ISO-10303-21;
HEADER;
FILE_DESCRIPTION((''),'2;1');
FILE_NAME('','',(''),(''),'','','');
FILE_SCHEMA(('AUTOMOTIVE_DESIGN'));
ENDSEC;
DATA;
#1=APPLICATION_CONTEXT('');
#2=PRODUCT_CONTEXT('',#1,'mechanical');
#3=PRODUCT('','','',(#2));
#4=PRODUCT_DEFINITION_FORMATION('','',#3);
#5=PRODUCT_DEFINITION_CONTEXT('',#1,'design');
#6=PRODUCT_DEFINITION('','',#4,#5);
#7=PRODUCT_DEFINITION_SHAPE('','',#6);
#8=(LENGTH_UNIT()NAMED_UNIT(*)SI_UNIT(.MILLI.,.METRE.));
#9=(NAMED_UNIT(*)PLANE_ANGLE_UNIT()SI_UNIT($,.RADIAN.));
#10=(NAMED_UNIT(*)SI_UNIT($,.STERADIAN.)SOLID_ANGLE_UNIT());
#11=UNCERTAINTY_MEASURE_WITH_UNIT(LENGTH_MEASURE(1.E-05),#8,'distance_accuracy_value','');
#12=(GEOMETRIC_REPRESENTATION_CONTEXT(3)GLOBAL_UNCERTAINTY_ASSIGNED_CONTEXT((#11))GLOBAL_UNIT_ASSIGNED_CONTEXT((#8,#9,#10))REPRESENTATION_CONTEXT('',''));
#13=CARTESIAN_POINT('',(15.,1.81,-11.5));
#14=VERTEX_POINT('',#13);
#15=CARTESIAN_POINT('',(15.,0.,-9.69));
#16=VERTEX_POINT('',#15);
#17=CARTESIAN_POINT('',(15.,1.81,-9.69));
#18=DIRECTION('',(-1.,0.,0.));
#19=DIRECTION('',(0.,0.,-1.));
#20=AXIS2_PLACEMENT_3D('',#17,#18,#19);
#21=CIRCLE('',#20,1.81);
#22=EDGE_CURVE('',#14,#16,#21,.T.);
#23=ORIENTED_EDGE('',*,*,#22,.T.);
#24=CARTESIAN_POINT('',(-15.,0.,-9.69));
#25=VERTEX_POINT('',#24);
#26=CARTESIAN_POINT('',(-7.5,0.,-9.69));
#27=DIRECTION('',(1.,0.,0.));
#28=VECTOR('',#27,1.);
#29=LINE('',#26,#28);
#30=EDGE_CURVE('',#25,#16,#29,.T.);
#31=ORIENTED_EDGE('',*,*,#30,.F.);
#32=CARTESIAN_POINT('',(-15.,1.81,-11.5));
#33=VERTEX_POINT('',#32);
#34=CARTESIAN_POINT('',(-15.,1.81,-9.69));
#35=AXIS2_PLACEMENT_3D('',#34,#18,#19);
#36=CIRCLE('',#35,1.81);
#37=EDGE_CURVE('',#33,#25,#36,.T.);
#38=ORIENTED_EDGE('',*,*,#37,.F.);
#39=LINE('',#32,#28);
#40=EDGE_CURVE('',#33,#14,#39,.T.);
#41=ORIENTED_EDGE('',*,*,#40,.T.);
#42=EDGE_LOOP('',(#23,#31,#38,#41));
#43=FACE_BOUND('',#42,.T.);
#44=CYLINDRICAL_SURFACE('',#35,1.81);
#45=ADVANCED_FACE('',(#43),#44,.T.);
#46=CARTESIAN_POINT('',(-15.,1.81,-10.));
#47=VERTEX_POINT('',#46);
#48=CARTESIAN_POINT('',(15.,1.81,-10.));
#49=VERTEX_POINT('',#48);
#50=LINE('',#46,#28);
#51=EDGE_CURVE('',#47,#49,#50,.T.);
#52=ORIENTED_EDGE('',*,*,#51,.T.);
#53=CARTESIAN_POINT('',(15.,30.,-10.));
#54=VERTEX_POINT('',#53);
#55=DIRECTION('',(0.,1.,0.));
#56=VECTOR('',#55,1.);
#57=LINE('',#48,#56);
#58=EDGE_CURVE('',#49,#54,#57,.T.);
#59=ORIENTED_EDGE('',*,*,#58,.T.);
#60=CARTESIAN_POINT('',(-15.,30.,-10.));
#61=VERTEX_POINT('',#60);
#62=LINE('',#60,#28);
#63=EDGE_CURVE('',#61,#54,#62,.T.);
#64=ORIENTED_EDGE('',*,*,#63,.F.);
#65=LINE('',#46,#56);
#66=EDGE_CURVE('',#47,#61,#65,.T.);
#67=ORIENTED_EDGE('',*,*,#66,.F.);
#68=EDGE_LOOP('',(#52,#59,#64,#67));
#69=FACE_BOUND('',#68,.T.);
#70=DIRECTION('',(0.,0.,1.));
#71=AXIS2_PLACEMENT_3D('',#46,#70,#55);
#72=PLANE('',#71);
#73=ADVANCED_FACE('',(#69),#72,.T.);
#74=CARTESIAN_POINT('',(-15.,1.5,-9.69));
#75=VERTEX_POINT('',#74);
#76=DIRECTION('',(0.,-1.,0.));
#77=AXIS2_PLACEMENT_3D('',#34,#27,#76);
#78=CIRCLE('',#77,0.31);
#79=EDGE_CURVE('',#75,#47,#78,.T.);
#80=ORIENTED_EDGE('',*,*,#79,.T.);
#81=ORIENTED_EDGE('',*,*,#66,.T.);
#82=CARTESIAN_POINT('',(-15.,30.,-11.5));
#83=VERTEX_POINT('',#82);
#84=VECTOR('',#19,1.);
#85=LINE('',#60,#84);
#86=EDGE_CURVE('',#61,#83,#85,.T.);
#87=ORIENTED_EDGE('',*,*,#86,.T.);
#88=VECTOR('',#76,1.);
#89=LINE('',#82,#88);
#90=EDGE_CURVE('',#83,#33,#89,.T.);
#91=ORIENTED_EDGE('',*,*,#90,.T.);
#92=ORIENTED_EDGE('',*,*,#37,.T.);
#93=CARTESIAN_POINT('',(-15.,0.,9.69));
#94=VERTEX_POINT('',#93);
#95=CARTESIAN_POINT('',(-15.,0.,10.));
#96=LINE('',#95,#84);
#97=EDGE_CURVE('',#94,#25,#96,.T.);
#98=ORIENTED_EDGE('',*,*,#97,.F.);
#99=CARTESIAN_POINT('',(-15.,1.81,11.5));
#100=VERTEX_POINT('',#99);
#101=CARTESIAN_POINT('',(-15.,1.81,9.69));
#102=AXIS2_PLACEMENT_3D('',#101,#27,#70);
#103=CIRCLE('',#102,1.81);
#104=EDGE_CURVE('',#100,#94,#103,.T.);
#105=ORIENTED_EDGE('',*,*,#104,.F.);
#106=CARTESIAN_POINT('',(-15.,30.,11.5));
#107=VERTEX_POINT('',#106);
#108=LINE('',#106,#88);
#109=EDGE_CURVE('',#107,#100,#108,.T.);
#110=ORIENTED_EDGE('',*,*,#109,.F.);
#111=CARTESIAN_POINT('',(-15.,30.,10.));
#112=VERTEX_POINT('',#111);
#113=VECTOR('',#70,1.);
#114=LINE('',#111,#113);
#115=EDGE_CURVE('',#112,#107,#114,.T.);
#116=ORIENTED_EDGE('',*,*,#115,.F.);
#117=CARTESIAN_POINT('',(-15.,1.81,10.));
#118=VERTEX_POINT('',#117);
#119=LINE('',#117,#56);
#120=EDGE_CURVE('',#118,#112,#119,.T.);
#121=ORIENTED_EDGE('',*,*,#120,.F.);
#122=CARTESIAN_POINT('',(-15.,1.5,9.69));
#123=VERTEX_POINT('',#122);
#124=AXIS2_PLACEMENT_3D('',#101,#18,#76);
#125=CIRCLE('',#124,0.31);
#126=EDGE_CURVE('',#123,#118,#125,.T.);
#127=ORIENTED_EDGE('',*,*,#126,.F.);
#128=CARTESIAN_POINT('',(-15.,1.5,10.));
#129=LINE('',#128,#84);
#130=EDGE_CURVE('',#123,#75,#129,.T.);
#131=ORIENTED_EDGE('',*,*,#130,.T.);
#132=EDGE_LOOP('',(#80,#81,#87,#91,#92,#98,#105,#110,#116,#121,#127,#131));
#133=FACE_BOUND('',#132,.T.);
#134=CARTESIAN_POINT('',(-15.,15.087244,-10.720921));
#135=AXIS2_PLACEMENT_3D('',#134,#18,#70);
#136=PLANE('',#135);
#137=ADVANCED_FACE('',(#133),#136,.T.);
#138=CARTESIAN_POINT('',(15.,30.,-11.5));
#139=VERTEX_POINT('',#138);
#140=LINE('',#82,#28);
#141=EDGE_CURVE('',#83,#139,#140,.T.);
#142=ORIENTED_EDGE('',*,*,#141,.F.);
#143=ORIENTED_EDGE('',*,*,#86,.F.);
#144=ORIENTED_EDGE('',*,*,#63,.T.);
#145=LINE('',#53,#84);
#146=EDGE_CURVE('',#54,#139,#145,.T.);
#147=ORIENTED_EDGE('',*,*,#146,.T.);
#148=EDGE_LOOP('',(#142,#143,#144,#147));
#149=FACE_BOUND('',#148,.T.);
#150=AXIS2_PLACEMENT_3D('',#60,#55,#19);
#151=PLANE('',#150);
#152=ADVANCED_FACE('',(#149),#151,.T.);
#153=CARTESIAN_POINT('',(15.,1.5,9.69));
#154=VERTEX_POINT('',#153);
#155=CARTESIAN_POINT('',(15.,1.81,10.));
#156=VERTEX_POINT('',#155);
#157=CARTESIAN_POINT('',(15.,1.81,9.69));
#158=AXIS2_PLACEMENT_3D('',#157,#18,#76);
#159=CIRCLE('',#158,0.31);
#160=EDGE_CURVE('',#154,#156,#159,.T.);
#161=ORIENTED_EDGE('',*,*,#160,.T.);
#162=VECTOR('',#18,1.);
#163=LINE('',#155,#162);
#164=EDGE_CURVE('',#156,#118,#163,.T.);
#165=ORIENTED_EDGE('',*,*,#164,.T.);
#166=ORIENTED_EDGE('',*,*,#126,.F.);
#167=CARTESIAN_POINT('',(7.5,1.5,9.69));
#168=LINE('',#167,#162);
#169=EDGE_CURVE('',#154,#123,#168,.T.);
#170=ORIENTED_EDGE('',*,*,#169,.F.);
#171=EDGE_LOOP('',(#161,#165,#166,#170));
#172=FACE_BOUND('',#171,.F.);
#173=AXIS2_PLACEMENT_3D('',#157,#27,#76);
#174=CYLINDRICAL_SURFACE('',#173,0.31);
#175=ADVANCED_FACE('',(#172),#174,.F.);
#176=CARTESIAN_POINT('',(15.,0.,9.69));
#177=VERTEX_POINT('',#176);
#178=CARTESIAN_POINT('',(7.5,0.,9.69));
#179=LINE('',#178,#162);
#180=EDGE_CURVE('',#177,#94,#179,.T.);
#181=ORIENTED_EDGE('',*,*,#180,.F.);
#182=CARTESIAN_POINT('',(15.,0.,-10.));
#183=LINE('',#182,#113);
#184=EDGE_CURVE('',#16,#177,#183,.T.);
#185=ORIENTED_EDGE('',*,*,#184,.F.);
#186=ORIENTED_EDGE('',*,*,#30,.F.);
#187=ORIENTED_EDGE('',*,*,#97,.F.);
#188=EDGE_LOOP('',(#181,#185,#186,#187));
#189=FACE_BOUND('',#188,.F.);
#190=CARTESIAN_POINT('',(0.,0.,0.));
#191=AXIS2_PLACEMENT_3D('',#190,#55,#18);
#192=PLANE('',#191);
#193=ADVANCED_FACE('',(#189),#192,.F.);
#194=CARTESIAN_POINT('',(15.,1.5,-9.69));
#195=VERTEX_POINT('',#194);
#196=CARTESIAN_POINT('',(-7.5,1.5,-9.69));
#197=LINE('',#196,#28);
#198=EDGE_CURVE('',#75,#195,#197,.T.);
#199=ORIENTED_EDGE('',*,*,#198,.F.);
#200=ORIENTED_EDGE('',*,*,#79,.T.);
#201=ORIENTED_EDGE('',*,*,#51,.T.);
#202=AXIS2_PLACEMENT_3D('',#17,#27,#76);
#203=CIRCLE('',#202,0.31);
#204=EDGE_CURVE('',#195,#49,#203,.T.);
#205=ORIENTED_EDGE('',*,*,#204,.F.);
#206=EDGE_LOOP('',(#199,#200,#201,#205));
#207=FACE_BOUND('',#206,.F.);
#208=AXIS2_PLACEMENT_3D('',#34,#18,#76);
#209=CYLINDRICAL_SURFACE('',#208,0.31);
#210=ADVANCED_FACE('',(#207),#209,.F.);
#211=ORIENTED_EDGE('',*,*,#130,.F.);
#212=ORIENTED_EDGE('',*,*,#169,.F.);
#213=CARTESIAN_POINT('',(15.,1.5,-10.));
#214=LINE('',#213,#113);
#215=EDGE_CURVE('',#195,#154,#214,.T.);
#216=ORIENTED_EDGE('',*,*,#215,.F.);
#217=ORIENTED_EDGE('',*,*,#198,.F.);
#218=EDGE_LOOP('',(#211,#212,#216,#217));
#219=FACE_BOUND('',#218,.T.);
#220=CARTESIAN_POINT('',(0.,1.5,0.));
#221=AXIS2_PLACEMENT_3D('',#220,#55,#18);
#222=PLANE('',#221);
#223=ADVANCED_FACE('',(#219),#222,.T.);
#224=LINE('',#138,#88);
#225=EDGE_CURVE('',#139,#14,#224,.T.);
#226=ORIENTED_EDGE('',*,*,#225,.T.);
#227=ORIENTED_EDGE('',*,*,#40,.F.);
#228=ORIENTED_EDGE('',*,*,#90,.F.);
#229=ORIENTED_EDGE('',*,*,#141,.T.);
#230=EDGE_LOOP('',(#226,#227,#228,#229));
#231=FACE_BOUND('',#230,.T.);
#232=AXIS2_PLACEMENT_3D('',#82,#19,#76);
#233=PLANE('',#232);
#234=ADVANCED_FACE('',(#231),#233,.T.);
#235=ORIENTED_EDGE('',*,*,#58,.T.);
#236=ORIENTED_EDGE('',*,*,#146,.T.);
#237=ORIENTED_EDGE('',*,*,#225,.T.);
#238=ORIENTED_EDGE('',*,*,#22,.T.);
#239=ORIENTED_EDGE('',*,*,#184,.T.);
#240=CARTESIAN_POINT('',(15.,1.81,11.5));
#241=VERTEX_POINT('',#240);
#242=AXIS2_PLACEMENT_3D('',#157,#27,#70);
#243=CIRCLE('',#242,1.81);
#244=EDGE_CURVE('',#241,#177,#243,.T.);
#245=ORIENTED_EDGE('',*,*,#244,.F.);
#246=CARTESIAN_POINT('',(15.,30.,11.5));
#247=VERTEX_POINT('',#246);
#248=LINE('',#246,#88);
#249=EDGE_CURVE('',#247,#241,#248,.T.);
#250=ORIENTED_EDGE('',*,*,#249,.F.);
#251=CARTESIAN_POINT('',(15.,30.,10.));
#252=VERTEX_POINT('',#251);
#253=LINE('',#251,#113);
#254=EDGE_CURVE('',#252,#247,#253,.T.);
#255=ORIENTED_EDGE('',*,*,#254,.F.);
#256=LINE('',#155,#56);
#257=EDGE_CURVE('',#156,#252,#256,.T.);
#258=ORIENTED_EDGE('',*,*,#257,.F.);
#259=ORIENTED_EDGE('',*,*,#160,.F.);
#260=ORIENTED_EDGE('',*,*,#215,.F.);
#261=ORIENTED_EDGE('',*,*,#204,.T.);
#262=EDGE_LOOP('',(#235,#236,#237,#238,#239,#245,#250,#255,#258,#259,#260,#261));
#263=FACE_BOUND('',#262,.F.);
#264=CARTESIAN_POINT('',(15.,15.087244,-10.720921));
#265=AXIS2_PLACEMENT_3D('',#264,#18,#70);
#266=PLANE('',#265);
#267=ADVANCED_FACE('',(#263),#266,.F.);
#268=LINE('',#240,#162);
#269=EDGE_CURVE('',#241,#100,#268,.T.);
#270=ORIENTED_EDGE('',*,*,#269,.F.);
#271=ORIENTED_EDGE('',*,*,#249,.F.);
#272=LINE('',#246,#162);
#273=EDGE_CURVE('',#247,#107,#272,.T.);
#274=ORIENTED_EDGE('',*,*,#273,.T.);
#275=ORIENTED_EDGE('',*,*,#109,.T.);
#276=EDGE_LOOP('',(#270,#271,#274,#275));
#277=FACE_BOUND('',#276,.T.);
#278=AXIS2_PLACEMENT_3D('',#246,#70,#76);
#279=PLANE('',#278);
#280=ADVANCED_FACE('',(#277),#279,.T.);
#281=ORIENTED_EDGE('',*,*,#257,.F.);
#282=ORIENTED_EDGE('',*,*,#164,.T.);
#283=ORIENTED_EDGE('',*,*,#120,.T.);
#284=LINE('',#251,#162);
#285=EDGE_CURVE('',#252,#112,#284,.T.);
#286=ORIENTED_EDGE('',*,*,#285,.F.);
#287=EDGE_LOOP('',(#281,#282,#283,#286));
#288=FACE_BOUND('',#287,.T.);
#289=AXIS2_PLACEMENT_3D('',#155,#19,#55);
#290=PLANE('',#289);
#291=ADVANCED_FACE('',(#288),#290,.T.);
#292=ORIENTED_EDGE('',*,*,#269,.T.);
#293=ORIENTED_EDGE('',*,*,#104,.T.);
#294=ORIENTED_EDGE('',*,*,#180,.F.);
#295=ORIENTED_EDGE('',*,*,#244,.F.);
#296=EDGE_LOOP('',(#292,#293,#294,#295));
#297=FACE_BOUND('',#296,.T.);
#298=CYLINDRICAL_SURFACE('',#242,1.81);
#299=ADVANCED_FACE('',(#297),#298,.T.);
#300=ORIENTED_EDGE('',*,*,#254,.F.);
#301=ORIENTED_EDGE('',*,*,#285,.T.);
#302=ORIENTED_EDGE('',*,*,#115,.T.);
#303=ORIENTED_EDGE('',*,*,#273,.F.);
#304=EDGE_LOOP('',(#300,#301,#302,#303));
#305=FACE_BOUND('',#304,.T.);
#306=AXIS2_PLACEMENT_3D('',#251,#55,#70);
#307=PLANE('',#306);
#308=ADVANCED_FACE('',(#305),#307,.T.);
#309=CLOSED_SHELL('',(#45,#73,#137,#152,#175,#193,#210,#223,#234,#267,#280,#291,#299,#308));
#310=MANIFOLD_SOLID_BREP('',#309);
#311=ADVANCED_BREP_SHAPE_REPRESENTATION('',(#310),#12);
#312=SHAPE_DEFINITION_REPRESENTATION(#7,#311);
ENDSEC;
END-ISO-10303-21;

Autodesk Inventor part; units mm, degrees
ref_plane "YZ Plane" through (0, 0, 0) normal (1, 0, 0) x (0, 1, 0)
ref_plane "XZ Plane" through (0, 0, 0) normal (0, 1, 0) x (-1, 0, 0)
ref_plane "XY Plane" through (0, 0, 0) normal (0, 0, 1) x (1, 0, 0)
sketch "Sketch1" plane through (0, 0, 0) normal (0, 1, 0) x (-1, 0, 0)
  line L0 (-15, 10) -> (15, 10)
  line L1 (15, 10) -> (15, -10)
  line L2 (15, -10) -> (-15, -10)
  line L3 (-15, -10) -> (-15, 10)
  line L4 (-15, 10) -> (15, -10) construction
  line L5 (15, 10) -> (-15, -10) construction
  point P0 (0, 0)
  dimension "d0" = 20
  dimension "d1" = 30
extrude "Plate1" add sketch "Sketch1" along normal blind 1.5
sketch "Sketch2" plane through (-15, 0, -11.5) normal (0, 0, 1) x (1, 0, 0)
  line L0 (30, 0) -> (0, 0)
  line L1 (0, 0) -> (0, 30)
  line L2 (0, 30) -> (30, 30)
  line L3 (30, 30) -> (30, 0)
edge flange "Flange1" height 30 angle 90 thickness 1.5 bend radius 0.31 thickness toward (0, 0, 1) relief tear relief width 1.5 relief depth 0.75 corner gap 0.31 corner form 0 edges at (0, 1.5, -10) (0, 1.5, 10) wall of the first edge with corners at (15, 0, -11.5) (-15, 0, -11.5) (-15, 30, -11.5) (15, 30, -11.5)
bend "Bend1"
corner "Corner1"
equation "\"d2\" = Thickness"
equation "\"d3\" = BendReliefWidth"
equation "\"d4\" = BendReliefDepth"
equation "\"d5\" = MinimumRemnant"
equation "\"d6\" = TransitionRadius"
equation "\"d9\" = BendRadius"
equation "\"d10\" = CornerReliefSize"
equation "\"d11\" = GapSize"
equation "\"d12\" = JacobiRadiusSize"
equation "\"BendReliefWidth\" = Thickness"
equation "\"BendReliefDepth\" = 0.5 * Thickness"
equation "\"CornerReliefSize\" = 4 * Thickness"
equation "\"MinimumRemnant\" = 2 * Thickness"
equation "\"TransitionRadius\" = BendRadius"
equation "\"JacobiRadiusSize\" = BendRadius"
equation "\"GapSize\" = Thickness"
equation "\"Thickness\" = 1.5"
equation "\"BendRadius\" = 0.31"
properties part number "axis_19_top_frame" material "Aluminum 6061-AHC"
